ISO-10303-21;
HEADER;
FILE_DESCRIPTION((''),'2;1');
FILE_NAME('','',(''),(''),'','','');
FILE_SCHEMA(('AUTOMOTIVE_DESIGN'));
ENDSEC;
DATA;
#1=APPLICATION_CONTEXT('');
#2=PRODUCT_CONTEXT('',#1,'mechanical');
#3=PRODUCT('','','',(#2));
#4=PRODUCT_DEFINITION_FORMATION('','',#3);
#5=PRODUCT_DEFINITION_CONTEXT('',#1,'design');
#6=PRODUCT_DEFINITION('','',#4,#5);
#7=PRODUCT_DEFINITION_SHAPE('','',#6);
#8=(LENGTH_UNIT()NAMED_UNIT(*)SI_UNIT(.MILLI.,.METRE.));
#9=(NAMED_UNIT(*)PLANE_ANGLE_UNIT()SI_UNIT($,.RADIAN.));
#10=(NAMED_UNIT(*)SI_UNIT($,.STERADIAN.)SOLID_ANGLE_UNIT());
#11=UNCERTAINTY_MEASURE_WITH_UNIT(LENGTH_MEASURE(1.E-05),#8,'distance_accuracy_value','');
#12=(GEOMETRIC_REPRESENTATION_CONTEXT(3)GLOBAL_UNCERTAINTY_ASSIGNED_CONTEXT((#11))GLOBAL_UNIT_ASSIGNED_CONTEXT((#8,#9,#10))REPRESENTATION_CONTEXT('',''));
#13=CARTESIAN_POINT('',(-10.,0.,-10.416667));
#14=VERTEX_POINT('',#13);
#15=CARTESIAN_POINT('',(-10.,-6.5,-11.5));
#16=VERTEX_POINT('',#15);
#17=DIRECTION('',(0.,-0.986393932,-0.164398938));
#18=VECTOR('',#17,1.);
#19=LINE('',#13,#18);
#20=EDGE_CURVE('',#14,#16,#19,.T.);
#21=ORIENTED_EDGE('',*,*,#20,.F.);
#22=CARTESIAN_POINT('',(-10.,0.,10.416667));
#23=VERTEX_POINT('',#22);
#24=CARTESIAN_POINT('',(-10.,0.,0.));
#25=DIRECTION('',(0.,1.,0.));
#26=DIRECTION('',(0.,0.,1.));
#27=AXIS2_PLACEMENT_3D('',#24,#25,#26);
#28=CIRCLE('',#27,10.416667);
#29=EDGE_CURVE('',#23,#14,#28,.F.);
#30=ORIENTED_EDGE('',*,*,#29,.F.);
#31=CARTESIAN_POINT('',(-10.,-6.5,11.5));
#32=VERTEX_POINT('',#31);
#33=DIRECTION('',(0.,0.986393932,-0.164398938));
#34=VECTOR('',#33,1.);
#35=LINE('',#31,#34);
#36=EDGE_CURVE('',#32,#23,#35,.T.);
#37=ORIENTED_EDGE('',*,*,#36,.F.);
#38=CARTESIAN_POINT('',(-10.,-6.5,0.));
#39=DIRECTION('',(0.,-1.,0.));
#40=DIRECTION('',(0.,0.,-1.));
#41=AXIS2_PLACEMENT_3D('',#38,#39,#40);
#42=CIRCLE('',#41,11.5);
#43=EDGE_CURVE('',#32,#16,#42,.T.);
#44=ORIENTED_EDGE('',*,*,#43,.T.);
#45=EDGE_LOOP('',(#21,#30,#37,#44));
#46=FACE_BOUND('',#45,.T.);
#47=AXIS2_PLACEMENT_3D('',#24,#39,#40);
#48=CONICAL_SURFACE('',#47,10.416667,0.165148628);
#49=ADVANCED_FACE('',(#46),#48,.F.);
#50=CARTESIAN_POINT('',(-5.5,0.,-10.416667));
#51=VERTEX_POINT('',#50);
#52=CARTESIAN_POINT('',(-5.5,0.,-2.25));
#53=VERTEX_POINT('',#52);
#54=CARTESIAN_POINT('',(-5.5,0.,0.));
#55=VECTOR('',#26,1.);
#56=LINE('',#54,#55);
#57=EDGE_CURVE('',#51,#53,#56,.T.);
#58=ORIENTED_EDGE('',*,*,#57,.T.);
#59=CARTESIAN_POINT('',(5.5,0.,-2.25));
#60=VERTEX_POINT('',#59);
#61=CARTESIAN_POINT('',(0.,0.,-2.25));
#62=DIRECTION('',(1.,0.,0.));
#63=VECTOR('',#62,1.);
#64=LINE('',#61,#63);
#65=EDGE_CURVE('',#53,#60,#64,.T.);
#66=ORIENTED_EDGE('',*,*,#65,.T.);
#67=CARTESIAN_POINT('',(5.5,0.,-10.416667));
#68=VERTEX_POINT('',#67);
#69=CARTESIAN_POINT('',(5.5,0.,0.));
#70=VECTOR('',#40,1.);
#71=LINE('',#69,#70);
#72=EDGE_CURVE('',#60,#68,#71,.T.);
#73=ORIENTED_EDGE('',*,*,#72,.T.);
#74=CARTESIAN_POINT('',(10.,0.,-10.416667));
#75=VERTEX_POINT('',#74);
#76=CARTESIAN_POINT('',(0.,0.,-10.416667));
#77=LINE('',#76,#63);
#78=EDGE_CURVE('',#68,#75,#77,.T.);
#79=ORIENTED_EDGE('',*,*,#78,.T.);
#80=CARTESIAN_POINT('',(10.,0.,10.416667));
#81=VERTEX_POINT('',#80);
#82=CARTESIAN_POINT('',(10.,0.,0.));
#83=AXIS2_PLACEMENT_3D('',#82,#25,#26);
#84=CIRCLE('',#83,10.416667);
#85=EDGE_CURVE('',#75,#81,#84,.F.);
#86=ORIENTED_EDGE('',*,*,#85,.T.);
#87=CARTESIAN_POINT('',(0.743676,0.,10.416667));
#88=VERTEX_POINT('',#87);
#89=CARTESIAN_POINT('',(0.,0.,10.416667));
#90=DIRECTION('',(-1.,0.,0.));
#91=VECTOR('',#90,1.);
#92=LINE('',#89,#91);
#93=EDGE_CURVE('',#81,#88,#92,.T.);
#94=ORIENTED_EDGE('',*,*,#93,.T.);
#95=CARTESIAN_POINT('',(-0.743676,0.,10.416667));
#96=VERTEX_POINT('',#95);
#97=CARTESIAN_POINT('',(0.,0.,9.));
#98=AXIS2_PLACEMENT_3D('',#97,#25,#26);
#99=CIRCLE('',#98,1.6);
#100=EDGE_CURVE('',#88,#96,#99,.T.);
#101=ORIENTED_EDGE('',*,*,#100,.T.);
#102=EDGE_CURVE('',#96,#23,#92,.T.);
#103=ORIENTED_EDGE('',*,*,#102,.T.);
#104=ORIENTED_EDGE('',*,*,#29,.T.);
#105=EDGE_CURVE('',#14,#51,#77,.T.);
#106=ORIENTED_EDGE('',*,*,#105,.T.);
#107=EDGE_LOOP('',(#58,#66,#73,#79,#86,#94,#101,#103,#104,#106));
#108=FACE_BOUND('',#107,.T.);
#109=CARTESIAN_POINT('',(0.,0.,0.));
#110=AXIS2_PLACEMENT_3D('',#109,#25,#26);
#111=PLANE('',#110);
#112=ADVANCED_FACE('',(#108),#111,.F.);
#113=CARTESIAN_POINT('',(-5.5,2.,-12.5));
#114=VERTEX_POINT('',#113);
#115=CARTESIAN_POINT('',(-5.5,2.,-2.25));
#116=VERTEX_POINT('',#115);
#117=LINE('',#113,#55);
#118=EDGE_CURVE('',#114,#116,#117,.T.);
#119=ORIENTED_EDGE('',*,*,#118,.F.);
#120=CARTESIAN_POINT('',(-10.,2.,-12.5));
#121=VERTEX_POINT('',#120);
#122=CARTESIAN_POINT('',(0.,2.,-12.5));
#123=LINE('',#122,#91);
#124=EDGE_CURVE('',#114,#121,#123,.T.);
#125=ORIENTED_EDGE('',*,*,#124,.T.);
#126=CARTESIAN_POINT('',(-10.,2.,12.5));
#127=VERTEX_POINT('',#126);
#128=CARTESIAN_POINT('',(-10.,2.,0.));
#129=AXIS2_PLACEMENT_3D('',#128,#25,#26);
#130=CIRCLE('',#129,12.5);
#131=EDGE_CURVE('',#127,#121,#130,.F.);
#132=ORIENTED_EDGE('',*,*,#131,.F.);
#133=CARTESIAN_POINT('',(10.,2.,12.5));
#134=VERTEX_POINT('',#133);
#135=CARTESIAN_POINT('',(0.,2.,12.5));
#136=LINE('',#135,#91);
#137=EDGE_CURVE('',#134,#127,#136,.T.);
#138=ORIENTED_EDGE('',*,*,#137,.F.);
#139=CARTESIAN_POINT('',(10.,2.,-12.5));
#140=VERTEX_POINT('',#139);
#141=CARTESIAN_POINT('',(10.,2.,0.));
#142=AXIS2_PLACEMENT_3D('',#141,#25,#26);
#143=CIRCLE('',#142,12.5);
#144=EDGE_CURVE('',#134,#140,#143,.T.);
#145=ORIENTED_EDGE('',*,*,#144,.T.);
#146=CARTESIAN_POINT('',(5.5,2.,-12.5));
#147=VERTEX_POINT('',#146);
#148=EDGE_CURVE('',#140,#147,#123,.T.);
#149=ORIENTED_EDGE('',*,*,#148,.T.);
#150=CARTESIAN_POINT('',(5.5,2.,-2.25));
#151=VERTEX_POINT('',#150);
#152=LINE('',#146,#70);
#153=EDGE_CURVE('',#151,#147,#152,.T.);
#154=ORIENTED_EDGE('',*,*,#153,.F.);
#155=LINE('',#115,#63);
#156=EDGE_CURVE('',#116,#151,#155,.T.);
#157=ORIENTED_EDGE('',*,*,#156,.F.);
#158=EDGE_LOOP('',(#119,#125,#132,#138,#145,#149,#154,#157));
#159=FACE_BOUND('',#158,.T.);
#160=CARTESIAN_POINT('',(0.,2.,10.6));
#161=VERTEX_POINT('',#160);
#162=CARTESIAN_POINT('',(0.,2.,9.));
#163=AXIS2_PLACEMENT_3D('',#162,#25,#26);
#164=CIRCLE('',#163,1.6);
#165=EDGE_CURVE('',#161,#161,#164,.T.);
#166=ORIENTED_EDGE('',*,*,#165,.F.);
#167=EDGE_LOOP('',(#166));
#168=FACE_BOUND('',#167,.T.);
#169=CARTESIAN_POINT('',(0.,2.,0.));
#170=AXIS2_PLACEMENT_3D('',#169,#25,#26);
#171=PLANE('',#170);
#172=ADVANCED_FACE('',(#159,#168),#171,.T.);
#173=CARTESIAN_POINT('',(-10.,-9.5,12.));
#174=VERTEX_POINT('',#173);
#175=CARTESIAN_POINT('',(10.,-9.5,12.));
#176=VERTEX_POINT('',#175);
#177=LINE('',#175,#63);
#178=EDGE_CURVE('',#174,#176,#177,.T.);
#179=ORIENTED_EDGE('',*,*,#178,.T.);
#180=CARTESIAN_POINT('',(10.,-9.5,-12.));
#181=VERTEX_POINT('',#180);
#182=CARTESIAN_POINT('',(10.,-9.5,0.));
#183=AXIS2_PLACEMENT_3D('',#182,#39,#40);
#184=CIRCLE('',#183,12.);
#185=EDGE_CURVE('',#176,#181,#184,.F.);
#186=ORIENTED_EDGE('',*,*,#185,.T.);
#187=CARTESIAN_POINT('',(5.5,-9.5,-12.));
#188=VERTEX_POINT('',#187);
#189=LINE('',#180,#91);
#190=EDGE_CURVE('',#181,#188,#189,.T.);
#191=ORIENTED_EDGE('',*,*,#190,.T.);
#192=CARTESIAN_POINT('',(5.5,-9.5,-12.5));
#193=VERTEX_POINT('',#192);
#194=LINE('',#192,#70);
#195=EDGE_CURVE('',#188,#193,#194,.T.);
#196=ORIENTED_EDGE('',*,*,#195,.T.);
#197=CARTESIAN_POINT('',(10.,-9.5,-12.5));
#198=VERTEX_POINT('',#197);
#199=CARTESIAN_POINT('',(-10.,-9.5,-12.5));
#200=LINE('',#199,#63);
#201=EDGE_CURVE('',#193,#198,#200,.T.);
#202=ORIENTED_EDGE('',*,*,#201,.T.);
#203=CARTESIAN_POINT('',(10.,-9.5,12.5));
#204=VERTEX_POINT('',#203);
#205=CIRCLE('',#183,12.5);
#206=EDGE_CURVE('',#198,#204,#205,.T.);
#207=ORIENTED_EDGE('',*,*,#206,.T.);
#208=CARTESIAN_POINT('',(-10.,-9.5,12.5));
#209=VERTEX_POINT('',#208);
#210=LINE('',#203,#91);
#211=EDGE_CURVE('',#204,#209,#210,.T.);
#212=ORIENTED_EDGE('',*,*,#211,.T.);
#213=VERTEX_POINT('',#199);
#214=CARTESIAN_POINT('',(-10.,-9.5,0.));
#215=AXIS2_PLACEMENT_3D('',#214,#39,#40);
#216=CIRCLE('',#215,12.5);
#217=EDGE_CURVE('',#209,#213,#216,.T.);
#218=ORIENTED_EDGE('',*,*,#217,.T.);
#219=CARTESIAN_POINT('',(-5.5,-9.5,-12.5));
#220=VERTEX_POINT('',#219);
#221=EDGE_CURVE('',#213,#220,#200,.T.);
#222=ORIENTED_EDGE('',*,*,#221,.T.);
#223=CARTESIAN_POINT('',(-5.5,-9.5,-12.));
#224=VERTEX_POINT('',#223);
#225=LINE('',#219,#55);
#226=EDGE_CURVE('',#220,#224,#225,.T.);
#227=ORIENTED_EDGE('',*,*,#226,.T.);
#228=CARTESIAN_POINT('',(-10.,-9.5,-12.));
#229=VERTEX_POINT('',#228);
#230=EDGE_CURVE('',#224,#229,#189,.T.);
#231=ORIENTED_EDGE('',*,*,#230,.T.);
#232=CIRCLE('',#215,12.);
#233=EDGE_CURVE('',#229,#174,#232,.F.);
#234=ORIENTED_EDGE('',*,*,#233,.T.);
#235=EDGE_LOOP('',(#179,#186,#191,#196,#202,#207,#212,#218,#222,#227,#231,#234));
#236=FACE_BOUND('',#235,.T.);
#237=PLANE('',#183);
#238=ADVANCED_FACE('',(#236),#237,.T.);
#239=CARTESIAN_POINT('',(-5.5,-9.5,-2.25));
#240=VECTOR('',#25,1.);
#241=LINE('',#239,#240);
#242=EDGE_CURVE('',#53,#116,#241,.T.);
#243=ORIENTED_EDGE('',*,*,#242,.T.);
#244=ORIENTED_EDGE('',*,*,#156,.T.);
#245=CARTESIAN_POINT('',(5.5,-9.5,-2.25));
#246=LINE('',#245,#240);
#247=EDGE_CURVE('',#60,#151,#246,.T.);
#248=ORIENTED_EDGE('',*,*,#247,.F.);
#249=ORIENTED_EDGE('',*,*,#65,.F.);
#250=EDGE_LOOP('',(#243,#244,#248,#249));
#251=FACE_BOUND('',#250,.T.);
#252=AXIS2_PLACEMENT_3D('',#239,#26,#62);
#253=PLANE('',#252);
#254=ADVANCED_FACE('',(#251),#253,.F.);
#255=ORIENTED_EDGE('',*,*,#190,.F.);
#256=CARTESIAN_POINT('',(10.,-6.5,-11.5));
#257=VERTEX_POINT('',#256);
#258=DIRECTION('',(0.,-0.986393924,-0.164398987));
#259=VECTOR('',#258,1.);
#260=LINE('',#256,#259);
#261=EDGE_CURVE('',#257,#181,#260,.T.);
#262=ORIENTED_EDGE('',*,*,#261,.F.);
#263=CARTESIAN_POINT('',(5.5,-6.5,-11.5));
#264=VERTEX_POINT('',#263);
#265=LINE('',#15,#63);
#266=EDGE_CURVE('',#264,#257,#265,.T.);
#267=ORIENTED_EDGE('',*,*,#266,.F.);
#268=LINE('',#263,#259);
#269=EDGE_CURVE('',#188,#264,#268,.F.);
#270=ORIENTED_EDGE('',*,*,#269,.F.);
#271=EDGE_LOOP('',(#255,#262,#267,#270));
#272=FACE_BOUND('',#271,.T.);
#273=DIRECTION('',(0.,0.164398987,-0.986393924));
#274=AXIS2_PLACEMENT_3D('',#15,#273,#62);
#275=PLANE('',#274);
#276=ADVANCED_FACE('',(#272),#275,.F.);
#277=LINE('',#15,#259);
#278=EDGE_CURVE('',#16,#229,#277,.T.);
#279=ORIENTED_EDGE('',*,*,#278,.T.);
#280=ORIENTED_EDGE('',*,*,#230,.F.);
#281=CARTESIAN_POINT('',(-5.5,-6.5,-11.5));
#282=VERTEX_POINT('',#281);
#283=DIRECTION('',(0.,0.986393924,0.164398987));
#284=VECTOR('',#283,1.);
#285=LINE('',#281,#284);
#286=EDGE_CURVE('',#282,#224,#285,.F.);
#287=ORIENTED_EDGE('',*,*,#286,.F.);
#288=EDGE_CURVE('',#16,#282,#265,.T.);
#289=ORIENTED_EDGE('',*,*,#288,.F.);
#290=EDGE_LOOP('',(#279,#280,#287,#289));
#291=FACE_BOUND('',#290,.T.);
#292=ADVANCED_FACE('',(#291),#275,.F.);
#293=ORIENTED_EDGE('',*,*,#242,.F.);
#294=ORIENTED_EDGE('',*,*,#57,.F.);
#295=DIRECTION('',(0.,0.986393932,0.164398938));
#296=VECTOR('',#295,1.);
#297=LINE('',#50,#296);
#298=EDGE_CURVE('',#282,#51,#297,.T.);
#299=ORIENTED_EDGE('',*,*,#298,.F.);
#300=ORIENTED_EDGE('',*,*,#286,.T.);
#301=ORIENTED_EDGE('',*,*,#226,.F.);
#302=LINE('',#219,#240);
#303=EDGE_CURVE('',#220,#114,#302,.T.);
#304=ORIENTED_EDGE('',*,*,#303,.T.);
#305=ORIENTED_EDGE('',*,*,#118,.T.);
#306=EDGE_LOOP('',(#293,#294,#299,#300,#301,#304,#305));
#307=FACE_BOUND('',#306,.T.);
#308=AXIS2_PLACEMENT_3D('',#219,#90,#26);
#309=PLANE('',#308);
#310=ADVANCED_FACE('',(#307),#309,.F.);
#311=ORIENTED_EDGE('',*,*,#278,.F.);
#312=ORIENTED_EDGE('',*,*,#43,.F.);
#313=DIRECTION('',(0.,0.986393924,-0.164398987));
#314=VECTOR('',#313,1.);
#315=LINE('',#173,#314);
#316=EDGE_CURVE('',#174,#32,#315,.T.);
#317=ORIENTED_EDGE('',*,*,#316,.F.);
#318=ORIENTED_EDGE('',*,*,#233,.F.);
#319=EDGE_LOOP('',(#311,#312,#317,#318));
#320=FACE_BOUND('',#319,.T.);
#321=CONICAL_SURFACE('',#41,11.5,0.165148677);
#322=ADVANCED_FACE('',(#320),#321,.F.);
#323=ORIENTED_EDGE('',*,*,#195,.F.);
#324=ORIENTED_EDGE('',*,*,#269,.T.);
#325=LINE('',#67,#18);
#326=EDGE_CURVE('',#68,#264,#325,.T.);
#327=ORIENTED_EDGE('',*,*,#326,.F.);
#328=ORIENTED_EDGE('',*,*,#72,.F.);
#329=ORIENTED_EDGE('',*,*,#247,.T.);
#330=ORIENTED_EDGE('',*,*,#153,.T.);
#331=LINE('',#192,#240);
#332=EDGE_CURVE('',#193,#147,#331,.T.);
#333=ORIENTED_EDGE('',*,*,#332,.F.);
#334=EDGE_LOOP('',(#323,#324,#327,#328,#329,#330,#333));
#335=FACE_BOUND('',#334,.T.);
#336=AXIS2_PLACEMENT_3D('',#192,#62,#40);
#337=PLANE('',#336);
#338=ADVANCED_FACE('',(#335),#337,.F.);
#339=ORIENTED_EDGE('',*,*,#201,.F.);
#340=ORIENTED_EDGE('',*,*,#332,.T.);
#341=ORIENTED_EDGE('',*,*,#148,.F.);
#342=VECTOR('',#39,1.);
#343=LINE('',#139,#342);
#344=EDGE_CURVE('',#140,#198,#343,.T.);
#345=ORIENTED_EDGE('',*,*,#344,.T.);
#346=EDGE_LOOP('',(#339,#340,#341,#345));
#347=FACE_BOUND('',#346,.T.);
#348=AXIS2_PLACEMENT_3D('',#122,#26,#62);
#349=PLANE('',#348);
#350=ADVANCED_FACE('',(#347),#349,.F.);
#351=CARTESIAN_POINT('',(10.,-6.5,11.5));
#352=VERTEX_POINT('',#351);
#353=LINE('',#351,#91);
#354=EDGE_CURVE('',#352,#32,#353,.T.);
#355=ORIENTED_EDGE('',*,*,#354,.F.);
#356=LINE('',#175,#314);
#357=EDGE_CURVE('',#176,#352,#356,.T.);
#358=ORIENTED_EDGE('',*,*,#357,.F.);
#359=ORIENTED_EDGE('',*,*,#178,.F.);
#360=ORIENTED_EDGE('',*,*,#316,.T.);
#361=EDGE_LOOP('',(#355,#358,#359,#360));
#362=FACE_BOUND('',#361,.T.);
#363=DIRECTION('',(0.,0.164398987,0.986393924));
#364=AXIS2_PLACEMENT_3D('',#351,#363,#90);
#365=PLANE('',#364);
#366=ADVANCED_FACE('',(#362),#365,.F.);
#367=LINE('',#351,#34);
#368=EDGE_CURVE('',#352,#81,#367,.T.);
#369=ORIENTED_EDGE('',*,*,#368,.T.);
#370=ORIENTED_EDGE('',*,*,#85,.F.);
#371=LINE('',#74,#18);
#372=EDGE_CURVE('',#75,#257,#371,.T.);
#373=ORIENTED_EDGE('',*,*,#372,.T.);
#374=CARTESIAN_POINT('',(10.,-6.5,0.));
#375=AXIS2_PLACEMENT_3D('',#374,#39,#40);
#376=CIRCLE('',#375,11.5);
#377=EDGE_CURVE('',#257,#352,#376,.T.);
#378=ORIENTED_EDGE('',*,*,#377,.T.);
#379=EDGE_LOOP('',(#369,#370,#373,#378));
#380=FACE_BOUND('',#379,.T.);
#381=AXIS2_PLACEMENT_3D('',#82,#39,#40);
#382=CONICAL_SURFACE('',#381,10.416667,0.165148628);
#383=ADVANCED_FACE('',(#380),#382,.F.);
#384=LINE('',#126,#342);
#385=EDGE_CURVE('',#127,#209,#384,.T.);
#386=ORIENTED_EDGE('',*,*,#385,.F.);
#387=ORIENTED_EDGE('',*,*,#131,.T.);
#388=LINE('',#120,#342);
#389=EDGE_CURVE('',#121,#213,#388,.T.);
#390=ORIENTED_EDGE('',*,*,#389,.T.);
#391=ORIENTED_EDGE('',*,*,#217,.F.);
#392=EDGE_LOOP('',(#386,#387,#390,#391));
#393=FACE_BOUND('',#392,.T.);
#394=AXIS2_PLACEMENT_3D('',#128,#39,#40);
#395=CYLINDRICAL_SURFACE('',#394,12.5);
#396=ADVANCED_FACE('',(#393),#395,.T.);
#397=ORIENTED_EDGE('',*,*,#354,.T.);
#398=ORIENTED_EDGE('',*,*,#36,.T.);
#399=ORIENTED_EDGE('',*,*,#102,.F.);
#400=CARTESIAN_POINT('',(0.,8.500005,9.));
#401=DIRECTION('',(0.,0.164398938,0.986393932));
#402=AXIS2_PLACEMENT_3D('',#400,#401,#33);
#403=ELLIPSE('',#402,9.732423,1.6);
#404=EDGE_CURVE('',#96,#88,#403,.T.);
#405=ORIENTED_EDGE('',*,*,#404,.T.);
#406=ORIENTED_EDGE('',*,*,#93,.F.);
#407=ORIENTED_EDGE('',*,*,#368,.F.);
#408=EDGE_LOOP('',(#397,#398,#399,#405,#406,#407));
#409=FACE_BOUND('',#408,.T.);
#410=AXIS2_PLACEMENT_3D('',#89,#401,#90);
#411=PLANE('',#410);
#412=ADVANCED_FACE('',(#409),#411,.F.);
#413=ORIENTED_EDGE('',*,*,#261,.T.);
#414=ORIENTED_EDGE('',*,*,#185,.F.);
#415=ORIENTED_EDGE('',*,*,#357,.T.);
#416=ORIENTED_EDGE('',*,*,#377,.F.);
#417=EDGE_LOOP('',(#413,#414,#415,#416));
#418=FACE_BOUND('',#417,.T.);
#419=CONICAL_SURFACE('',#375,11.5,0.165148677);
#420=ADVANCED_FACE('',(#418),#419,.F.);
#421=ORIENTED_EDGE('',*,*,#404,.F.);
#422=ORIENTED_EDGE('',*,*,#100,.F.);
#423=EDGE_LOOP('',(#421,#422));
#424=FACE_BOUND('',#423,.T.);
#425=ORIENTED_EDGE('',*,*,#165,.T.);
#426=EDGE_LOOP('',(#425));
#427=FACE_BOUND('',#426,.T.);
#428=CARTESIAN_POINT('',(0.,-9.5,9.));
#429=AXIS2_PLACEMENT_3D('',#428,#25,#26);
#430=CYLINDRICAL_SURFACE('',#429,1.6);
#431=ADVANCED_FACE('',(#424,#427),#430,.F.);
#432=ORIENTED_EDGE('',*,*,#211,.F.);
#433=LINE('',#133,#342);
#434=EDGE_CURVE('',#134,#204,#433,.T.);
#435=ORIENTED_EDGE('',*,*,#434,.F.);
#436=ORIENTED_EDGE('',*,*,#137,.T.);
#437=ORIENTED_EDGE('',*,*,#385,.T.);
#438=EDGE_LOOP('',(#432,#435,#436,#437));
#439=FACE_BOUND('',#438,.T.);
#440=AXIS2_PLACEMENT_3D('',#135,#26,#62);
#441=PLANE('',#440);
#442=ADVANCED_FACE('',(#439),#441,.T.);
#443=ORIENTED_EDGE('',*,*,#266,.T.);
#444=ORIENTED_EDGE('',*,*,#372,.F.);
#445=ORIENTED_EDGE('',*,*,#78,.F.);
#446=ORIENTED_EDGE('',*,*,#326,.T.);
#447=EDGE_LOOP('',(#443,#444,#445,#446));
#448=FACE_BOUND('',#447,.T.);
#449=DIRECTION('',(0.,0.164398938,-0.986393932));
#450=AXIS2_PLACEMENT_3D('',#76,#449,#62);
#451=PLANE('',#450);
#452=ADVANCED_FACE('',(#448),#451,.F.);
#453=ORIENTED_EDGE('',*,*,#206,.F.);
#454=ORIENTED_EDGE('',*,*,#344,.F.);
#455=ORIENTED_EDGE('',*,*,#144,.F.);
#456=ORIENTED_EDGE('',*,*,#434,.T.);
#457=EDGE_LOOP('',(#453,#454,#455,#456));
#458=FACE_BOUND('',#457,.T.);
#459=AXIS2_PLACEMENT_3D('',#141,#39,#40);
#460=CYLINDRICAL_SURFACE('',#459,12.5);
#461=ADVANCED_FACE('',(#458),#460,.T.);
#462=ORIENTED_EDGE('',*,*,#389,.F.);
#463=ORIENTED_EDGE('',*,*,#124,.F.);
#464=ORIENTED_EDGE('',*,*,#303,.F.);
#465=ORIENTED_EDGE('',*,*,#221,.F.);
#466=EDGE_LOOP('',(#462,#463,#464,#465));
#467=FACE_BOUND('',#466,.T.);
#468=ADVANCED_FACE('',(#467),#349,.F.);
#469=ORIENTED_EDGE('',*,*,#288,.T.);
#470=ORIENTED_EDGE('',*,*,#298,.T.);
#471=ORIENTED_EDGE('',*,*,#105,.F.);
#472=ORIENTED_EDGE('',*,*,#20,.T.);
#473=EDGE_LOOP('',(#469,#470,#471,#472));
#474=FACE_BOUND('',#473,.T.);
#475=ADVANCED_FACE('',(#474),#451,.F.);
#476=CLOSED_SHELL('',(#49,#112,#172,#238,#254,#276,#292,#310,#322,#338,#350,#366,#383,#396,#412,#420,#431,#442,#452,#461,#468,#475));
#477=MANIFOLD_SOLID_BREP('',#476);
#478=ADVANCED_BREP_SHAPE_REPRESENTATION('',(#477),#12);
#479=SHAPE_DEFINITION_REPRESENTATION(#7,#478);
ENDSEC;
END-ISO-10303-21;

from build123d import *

# Parameters (mm, degrees)
BOSS_EXTRUDE1_DEPTH = 2
BOSS_EXTRUDE2_START = 9.5
BOSS_EXTRUDE2_DEPTH = 9.5
CHAMFER1_SIZE       = 0.5
CHAMFER1_SIZE2      = 3
CHAMFER2_SIZE       = 1.083333
CHAMFER2_SIZE_2     = 6.5
SKETCH4_W           = 11
SKETCH4_H           = 10.25
CUT_EXTRUDE1_DEPTH  = 29.191310718
SKETCH5_R           = 1.6
CUT_EXTRUDE2_DEPTH  = 29.191310718


with BuildPart() as part:
    # Sketch1 → Boss-Extrude1 (new body)
    with BuildSketch(Plane(origin=(0, 0, 0), x_dir=(1, 0, 0), z_dir=(0, 1, 0))):
        with BuildLine():
            Line((-22.5, 0), (-10, 0))
            Line((-10, 0), (0, 0))
            Line((0, 0), (0, 12.5))
            Line((0, 12.5), (-10, 12.5))
            ThreePointArc((-10, 12.5), (-18.838834765, 8.838834765), (-22.5, 0))
        make_face()
        with BuildLine():
            Line((0, 0), (-10, 0))
            Line((-10, 0), (-22.5, 0))
            ThreePointArc((-22.5, 0), (-18.838834765, -8.838834765), (-10, -12.5))
            Line((-10, -12.5), (0, -12.5))
            Line((0, -12.5), (0, 0))
        make_face()
        with BuildLine():
            Line((0, 12.5), (0, 0))
            Line((0, 0), (10, 0))
            Line((10, 0), (22.5, 0))
            ThreePointArc((22.5, 0), (18.838834765, 8.838834765), (10, 12.5))
            Line((10, 12.5), (0, 12.5))
        make_face()
        with BuildLine():
            Line((10, 0), (0, 0))
            Line((0, 0), (0, -12.5))
            Line((0, -12.5), (10, -12.5))
            ThreePointArc((10, -12.5), (18.838834765, -8.838834765), (22.5, 0))
            Line((22.5, 0), (10, 0))
        make_face()
    extrude(amount=BOSS_EXTRUDE1_DEPTH)

    # Sketch2 → Boss-Extrude2 (add)
    with BuildSketch(Plane.XZ.offset(BOSS_EXTRUDE2_START)):
        with BuildLine():
            Line((-10, -12.5), (10, -12.5))
            ThreePointArc((10, -12.5), (22.5, 0), (10, 12.5))
            Line((10, 12.5), (-10, 12.5))
            ThreePointArc((-10, 12.5), (-22.5, 0), (-10, -12.5))
        make_face()
        with BuildLine():
            Line((-10, -11.5), (10, -11.5))
            ThreePointArc((10, -11.5), (21.5, 0), (10, 11.5))
            Line((10, 11.5), (-10, 11.5))
            ThreePointArc((-10, 11.5), (-21.5, 0), (-10, -11.5))
        make_face(mode=Mode.SUBTRACT)
    extrude(amount=-BOSS_EXTRUDE2_DEPTH)

    # Chamfer1
    chamfer1_edges = [part.edges().sort_by_distance(p)[0] for p in [
        (-21.5, -9.5, 0),
        (0, -9.5, -11.5),
        (21.5, -9.5, 0),
        (0, -9.5, 11.5),
    ]]
    chamfer1_side = [part.faces().sort_by_distance(p)[0] for p in [
        (0, -9.5, -11.985218493),
    ]]
    chamfer(chamfer1_edges, length=CHAMFER1_SIZE, length2=CHAMFER1_SIZE2, reference=chamfer1_side[0])

    # Chamfer2
    # the kernel refuses this chamfer: 6.5, 1.083333 mm, written as the material it adds along each edge
    with BuildSketch(Plane(origin=(10, 0, 0), x_dir=(0, 0, -1), z_dir=(-1, 0, 0))) as chamfer2_piece_1:
        Polygon((11.5 - CHAMFER2_SIZE, 0), (11.5, CHAMFER2_SIZE_2), (11.5, 0), align=None)
    revolve(axis=Axis((10, 0, 0), (0, -1, 0)), revolution_arc=180)
    with BuildSketch(Plane(origin=(10, 0, 11.5), x_dir=(0, 0.22206230346399594, -0.9750324781156083), z_dir=(-1, 0, 0))) as chamfer2_piece_2:
        Polygon((CHAMFER2_SIZE * 0.975032478116, CHAMFER2_SIZE * 0.222062303464), (-CHAMFER2_SIZE_2 * 0.222062303464, CHAMFER2_SIZE_2 * 0.975032478116), (0, 0), align=None)
    extrude(amount=20)
    with BuildSketch(Plane(origin=(-10, 0, -11.5), x_dir=(0, -0.9999799892692318, -0.006326220127935647), z_dir=(1, 0, 0))) as chamfer2_piece_3:
        Polygon((CHAMFER2_SIZE_2 * 0.999979989269, -CHAMFER2_SIZE_2 * 0.00632622012794), (-CHAMFER2_SIZE * 0.00632622012794, -CHAMFER2_SIZE * 0.999979989269), (0, 0), align=None)
    extrude(amount=20)
    with BuildSketch(Plane(origin=(-10, 0, 0), x_dir=(0, 0, 1), z_dir=(1, 0, 0))) as chamfer2_piece_4:
        Polygon((11.5, CHAMFER2_SIZE_2), (11.5 - CHAMFER2_SIZE, 0), (11.5, 0), align=None)
    revolve(axis=Axis((-10, 0, 0), (0, -1, 0)), revolution_arc=180)

    # Sketch4 → Cut-Extrude1 (cut, through all)
    with BuildSketch(Plane(origin=(0, 2, 0), x_dir=(1, 0, 0), z_dir=(0, 1, 0))):
        with Locations((0, 7.375)):
            Rectangle(SKETCH4_W, SKETCH4_H)
    extrude(amount=-CUT_EXTRUDE1_DEPTH, mode=Mode.SUBTRACT)

    # Sketch5 → Cut-Extrude2 (cut, through all)
    with BuildSketch(Plane(origin=(0, 2, 0), x_dir=(1, 0, 0), z_dir=(0, 1, 0))):
        with Locations(Location((0, -9, 0), (0, 0, 270))):
            Circle(SKETCH5_R)
    extrude(amount=-CUT_EXTRUDE2_DEPTH, mode=Mode.SUBTRACT)


solid = part.part
